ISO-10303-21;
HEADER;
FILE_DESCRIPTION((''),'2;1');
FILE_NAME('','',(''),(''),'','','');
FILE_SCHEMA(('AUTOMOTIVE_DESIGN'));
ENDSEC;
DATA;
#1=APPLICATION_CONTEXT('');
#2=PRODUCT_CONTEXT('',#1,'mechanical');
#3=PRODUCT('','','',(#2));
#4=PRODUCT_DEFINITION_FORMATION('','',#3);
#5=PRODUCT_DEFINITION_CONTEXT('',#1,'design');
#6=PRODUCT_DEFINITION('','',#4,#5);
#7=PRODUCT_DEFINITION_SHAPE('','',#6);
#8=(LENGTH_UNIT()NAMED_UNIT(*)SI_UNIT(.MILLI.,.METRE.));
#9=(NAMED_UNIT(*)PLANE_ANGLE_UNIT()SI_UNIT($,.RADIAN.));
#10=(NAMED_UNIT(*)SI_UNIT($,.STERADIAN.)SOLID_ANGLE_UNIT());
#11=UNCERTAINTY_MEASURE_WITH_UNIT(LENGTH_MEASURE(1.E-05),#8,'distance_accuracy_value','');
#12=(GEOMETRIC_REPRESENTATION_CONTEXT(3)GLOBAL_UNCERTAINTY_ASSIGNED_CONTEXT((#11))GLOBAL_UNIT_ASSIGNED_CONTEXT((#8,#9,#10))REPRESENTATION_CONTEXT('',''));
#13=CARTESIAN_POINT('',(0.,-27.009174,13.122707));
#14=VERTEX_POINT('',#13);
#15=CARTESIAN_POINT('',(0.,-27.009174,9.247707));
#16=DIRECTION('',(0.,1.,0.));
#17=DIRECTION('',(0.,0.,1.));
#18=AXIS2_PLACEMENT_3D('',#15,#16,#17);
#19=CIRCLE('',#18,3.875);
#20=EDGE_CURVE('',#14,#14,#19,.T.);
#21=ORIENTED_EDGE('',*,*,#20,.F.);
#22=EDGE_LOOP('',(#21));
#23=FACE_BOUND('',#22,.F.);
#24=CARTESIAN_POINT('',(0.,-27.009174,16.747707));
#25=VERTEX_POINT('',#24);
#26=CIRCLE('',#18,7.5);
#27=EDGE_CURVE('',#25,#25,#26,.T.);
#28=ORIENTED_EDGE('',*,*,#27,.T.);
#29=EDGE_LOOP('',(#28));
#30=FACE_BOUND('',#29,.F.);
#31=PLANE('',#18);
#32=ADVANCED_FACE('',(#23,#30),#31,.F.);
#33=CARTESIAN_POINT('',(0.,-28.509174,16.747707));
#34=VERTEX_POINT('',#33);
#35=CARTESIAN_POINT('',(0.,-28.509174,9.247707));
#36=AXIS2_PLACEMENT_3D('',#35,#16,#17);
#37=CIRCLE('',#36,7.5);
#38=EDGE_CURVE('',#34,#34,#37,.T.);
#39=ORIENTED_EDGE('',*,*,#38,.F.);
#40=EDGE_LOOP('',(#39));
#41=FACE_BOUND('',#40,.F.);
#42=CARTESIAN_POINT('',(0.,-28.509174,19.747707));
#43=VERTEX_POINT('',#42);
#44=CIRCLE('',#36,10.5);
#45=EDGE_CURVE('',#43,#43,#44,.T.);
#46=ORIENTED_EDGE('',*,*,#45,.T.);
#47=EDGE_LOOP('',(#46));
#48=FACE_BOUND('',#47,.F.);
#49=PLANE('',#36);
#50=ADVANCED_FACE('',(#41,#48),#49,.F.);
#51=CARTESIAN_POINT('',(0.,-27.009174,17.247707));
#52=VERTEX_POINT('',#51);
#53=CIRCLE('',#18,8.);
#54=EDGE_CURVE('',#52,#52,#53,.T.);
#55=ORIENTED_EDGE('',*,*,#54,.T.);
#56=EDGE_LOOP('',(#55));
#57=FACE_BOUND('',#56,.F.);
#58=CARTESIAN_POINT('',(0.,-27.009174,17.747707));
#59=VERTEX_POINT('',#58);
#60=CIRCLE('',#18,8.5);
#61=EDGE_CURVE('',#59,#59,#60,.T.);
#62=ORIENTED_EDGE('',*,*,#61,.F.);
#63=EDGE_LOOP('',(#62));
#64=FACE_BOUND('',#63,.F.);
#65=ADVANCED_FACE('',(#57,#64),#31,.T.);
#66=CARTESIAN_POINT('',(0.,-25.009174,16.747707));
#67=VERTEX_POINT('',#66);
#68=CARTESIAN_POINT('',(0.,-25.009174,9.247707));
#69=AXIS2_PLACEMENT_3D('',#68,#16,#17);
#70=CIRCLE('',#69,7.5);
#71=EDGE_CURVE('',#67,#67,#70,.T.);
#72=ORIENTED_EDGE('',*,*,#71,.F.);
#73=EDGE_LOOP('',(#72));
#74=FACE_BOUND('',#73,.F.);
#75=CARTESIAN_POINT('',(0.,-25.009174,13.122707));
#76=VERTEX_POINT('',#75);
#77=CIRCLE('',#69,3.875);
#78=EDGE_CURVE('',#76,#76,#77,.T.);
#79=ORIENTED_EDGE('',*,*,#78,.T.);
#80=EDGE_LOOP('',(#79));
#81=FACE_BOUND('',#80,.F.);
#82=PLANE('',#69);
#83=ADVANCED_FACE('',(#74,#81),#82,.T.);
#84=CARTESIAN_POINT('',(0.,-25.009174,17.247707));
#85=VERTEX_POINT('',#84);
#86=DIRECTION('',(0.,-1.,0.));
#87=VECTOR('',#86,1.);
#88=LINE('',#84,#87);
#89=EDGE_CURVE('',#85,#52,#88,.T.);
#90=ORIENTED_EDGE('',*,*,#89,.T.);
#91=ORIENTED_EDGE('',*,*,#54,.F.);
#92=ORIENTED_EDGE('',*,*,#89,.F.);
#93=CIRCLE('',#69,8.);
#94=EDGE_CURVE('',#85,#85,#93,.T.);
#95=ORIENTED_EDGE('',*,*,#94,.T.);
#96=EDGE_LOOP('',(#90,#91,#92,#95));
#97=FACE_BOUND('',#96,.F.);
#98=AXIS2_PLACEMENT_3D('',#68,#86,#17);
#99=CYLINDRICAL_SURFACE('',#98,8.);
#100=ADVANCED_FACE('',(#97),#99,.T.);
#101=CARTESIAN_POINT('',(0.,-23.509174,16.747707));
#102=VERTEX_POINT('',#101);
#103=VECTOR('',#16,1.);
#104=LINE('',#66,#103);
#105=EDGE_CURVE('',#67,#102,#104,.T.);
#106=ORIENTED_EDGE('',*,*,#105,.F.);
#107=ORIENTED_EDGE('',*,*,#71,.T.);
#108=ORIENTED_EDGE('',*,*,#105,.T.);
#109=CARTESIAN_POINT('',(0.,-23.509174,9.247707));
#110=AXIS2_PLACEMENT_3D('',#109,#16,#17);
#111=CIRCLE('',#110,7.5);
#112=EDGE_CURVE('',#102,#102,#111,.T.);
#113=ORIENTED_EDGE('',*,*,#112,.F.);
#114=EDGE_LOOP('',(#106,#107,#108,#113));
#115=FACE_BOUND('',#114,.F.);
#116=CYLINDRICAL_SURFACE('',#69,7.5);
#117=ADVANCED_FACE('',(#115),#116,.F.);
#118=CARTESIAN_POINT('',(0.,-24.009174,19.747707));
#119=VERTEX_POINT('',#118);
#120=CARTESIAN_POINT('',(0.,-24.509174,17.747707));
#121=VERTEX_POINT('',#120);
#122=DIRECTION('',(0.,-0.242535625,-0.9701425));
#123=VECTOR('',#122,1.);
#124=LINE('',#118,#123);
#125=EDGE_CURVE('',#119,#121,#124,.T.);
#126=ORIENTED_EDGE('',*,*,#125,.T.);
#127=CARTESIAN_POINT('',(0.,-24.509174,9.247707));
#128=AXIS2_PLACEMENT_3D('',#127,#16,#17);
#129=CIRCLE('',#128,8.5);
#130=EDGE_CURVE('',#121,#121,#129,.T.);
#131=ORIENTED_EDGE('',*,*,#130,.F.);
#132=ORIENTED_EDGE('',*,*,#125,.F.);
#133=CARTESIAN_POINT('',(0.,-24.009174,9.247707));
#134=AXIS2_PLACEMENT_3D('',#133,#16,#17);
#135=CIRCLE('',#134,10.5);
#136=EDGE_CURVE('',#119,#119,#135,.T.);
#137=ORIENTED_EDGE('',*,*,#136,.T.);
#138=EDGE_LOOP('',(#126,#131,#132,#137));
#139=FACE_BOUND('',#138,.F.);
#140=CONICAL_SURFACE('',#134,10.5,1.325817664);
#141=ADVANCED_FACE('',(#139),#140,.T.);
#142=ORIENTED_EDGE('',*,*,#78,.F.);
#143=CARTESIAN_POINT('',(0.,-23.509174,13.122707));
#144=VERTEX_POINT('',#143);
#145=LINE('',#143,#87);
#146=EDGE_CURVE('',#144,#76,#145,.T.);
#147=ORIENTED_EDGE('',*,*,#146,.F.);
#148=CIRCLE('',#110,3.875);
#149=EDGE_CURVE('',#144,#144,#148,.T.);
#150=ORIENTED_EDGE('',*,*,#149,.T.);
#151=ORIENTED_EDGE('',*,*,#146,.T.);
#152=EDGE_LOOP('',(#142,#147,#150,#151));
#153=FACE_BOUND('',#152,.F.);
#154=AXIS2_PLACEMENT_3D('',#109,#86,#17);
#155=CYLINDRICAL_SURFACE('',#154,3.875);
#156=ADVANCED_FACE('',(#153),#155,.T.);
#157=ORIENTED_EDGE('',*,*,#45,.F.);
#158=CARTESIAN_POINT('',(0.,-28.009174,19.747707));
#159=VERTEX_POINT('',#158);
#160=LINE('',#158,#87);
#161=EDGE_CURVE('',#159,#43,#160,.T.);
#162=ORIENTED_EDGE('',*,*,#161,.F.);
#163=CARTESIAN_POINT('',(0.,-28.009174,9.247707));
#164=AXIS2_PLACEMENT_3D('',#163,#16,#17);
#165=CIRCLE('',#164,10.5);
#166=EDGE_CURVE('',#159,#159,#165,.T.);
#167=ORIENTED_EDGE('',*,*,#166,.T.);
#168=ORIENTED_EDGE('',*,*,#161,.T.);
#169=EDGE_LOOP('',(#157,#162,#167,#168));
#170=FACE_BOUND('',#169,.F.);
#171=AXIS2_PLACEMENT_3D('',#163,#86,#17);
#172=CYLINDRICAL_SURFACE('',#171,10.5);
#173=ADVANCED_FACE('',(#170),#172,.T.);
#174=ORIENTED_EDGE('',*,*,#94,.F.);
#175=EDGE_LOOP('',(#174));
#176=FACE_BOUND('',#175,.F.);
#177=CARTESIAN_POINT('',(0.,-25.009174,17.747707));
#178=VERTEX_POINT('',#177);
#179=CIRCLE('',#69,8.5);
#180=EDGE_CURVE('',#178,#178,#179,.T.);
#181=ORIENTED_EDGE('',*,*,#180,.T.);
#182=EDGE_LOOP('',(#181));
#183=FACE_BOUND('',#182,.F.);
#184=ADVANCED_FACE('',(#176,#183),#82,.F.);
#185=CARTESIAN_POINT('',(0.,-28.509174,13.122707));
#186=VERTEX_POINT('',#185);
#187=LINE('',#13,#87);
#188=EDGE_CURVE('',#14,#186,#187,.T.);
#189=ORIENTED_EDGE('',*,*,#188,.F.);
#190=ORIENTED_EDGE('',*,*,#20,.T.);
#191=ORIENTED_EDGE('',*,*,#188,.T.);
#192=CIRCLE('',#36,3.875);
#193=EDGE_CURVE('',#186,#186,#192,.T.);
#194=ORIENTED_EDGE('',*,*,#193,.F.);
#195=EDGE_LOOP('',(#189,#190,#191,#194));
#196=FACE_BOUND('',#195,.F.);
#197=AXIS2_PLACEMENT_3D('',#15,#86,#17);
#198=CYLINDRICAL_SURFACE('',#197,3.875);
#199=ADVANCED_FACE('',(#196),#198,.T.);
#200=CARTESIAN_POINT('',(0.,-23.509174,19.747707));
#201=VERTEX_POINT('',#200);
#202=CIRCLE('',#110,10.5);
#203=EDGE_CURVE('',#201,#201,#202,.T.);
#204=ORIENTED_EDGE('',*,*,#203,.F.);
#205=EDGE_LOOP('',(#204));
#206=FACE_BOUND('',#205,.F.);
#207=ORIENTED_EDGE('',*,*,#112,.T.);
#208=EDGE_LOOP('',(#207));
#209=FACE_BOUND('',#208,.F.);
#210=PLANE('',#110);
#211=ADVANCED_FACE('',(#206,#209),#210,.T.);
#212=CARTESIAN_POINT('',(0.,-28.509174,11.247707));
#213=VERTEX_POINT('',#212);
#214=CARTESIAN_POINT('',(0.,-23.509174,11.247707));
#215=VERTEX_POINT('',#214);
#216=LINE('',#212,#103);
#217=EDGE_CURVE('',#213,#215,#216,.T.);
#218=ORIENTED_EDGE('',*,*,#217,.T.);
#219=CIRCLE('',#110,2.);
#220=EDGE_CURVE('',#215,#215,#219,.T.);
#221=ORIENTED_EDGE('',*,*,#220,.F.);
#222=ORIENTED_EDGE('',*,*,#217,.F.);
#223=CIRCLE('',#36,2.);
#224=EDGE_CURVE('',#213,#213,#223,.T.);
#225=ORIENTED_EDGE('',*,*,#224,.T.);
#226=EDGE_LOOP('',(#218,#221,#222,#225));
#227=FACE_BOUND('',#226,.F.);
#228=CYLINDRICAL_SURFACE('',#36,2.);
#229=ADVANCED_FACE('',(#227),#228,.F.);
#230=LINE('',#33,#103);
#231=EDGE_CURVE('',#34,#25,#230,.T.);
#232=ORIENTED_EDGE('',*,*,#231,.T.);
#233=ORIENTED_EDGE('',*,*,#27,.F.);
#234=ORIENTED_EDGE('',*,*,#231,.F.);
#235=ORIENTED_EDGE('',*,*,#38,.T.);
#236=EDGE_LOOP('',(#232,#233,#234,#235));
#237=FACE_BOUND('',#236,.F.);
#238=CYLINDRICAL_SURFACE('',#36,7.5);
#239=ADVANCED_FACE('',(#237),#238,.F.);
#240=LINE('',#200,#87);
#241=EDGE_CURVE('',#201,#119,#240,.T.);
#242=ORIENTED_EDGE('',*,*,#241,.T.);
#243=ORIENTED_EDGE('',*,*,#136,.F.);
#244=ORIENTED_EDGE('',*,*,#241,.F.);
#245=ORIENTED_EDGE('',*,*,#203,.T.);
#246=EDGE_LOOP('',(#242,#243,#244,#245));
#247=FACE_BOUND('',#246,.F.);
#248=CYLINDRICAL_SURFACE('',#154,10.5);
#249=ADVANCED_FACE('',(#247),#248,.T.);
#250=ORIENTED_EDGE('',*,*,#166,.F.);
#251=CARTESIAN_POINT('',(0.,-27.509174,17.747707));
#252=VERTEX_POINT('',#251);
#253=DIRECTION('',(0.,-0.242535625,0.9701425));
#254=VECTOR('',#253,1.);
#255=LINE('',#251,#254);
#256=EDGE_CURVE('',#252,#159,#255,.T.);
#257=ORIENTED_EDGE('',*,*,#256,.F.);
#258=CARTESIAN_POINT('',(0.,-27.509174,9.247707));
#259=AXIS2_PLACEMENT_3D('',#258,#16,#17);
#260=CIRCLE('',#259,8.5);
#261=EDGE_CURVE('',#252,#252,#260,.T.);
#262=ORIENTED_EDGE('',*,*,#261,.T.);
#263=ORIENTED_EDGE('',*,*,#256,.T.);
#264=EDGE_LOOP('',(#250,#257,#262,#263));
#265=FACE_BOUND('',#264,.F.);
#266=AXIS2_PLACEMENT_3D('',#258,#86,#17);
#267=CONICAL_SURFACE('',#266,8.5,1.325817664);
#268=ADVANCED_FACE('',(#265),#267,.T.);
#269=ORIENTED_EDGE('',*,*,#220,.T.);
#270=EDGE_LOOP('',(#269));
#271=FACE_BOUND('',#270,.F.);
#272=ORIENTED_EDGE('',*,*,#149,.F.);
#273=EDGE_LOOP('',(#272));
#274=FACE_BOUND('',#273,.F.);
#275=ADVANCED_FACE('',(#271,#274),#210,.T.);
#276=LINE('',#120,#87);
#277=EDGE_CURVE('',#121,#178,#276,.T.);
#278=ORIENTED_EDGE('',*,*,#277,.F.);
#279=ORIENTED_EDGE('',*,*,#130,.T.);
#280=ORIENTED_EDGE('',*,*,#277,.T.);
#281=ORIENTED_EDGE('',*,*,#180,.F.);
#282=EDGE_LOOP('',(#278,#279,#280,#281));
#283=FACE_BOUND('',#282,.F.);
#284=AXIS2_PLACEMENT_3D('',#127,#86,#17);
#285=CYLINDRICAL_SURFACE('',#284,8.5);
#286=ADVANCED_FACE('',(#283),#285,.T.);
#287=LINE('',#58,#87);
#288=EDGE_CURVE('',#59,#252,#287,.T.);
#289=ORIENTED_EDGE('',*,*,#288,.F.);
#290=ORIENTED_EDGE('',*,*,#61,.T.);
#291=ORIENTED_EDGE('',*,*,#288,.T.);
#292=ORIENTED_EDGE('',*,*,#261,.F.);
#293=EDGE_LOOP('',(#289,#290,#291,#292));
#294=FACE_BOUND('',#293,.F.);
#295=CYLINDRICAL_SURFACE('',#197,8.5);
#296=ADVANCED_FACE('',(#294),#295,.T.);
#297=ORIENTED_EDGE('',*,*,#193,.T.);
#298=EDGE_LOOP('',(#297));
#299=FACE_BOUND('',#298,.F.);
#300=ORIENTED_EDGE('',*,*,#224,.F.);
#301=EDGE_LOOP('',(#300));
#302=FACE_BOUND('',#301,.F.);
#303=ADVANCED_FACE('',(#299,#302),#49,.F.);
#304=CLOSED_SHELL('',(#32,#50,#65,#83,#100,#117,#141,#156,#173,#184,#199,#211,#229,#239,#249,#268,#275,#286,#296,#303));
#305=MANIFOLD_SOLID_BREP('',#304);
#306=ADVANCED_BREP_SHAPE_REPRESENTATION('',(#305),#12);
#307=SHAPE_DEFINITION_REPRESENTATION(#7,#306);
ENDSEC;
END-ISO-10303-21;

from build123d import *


# Not quite as in the source:
# - a feature names something its author has since deleted; it is built from what else it names


with BuildPart() as f1:
    # F0 (on Right) → F1 (revolve)
    with BuildSketch(Plane.YZ):
        Polygon((-23.5091740638, 16.747707203), (-23.5091740638, 19.747707203), (-24.0091740638, 19.747707203), (-24.5091740638, 17.747707203), (-25.0091740638, 17.747707203), (-25.0091740638, 17.247707203), (-27.0091740638, 17.247707203), (-27.0091740638, 17.747707203), (-27.5091740638, 17.747707203), (-28.0091740638, 19.747707203), (-28.5091740638, 19.747707203), (-28.5091740638, 16.747707203), (-27.0091740638, 16.747707203), (-27.0091740638, 13.122707203), (-28.5091740638, 13.122707203), (-28.5091740638, 11.247707203), (-26.0091740638, 11.247707203), (-23.5091740638, 11.247707203), (-23.5091740638, 13.122707203), (-25.0091740638, 13.122707203), (-25.0091740638, 16.747707203), align=None)
    revolve(axis=Axis((0, -33.8120413944, 9.247707203), (0, 1, 0)))


solid = f1.part
